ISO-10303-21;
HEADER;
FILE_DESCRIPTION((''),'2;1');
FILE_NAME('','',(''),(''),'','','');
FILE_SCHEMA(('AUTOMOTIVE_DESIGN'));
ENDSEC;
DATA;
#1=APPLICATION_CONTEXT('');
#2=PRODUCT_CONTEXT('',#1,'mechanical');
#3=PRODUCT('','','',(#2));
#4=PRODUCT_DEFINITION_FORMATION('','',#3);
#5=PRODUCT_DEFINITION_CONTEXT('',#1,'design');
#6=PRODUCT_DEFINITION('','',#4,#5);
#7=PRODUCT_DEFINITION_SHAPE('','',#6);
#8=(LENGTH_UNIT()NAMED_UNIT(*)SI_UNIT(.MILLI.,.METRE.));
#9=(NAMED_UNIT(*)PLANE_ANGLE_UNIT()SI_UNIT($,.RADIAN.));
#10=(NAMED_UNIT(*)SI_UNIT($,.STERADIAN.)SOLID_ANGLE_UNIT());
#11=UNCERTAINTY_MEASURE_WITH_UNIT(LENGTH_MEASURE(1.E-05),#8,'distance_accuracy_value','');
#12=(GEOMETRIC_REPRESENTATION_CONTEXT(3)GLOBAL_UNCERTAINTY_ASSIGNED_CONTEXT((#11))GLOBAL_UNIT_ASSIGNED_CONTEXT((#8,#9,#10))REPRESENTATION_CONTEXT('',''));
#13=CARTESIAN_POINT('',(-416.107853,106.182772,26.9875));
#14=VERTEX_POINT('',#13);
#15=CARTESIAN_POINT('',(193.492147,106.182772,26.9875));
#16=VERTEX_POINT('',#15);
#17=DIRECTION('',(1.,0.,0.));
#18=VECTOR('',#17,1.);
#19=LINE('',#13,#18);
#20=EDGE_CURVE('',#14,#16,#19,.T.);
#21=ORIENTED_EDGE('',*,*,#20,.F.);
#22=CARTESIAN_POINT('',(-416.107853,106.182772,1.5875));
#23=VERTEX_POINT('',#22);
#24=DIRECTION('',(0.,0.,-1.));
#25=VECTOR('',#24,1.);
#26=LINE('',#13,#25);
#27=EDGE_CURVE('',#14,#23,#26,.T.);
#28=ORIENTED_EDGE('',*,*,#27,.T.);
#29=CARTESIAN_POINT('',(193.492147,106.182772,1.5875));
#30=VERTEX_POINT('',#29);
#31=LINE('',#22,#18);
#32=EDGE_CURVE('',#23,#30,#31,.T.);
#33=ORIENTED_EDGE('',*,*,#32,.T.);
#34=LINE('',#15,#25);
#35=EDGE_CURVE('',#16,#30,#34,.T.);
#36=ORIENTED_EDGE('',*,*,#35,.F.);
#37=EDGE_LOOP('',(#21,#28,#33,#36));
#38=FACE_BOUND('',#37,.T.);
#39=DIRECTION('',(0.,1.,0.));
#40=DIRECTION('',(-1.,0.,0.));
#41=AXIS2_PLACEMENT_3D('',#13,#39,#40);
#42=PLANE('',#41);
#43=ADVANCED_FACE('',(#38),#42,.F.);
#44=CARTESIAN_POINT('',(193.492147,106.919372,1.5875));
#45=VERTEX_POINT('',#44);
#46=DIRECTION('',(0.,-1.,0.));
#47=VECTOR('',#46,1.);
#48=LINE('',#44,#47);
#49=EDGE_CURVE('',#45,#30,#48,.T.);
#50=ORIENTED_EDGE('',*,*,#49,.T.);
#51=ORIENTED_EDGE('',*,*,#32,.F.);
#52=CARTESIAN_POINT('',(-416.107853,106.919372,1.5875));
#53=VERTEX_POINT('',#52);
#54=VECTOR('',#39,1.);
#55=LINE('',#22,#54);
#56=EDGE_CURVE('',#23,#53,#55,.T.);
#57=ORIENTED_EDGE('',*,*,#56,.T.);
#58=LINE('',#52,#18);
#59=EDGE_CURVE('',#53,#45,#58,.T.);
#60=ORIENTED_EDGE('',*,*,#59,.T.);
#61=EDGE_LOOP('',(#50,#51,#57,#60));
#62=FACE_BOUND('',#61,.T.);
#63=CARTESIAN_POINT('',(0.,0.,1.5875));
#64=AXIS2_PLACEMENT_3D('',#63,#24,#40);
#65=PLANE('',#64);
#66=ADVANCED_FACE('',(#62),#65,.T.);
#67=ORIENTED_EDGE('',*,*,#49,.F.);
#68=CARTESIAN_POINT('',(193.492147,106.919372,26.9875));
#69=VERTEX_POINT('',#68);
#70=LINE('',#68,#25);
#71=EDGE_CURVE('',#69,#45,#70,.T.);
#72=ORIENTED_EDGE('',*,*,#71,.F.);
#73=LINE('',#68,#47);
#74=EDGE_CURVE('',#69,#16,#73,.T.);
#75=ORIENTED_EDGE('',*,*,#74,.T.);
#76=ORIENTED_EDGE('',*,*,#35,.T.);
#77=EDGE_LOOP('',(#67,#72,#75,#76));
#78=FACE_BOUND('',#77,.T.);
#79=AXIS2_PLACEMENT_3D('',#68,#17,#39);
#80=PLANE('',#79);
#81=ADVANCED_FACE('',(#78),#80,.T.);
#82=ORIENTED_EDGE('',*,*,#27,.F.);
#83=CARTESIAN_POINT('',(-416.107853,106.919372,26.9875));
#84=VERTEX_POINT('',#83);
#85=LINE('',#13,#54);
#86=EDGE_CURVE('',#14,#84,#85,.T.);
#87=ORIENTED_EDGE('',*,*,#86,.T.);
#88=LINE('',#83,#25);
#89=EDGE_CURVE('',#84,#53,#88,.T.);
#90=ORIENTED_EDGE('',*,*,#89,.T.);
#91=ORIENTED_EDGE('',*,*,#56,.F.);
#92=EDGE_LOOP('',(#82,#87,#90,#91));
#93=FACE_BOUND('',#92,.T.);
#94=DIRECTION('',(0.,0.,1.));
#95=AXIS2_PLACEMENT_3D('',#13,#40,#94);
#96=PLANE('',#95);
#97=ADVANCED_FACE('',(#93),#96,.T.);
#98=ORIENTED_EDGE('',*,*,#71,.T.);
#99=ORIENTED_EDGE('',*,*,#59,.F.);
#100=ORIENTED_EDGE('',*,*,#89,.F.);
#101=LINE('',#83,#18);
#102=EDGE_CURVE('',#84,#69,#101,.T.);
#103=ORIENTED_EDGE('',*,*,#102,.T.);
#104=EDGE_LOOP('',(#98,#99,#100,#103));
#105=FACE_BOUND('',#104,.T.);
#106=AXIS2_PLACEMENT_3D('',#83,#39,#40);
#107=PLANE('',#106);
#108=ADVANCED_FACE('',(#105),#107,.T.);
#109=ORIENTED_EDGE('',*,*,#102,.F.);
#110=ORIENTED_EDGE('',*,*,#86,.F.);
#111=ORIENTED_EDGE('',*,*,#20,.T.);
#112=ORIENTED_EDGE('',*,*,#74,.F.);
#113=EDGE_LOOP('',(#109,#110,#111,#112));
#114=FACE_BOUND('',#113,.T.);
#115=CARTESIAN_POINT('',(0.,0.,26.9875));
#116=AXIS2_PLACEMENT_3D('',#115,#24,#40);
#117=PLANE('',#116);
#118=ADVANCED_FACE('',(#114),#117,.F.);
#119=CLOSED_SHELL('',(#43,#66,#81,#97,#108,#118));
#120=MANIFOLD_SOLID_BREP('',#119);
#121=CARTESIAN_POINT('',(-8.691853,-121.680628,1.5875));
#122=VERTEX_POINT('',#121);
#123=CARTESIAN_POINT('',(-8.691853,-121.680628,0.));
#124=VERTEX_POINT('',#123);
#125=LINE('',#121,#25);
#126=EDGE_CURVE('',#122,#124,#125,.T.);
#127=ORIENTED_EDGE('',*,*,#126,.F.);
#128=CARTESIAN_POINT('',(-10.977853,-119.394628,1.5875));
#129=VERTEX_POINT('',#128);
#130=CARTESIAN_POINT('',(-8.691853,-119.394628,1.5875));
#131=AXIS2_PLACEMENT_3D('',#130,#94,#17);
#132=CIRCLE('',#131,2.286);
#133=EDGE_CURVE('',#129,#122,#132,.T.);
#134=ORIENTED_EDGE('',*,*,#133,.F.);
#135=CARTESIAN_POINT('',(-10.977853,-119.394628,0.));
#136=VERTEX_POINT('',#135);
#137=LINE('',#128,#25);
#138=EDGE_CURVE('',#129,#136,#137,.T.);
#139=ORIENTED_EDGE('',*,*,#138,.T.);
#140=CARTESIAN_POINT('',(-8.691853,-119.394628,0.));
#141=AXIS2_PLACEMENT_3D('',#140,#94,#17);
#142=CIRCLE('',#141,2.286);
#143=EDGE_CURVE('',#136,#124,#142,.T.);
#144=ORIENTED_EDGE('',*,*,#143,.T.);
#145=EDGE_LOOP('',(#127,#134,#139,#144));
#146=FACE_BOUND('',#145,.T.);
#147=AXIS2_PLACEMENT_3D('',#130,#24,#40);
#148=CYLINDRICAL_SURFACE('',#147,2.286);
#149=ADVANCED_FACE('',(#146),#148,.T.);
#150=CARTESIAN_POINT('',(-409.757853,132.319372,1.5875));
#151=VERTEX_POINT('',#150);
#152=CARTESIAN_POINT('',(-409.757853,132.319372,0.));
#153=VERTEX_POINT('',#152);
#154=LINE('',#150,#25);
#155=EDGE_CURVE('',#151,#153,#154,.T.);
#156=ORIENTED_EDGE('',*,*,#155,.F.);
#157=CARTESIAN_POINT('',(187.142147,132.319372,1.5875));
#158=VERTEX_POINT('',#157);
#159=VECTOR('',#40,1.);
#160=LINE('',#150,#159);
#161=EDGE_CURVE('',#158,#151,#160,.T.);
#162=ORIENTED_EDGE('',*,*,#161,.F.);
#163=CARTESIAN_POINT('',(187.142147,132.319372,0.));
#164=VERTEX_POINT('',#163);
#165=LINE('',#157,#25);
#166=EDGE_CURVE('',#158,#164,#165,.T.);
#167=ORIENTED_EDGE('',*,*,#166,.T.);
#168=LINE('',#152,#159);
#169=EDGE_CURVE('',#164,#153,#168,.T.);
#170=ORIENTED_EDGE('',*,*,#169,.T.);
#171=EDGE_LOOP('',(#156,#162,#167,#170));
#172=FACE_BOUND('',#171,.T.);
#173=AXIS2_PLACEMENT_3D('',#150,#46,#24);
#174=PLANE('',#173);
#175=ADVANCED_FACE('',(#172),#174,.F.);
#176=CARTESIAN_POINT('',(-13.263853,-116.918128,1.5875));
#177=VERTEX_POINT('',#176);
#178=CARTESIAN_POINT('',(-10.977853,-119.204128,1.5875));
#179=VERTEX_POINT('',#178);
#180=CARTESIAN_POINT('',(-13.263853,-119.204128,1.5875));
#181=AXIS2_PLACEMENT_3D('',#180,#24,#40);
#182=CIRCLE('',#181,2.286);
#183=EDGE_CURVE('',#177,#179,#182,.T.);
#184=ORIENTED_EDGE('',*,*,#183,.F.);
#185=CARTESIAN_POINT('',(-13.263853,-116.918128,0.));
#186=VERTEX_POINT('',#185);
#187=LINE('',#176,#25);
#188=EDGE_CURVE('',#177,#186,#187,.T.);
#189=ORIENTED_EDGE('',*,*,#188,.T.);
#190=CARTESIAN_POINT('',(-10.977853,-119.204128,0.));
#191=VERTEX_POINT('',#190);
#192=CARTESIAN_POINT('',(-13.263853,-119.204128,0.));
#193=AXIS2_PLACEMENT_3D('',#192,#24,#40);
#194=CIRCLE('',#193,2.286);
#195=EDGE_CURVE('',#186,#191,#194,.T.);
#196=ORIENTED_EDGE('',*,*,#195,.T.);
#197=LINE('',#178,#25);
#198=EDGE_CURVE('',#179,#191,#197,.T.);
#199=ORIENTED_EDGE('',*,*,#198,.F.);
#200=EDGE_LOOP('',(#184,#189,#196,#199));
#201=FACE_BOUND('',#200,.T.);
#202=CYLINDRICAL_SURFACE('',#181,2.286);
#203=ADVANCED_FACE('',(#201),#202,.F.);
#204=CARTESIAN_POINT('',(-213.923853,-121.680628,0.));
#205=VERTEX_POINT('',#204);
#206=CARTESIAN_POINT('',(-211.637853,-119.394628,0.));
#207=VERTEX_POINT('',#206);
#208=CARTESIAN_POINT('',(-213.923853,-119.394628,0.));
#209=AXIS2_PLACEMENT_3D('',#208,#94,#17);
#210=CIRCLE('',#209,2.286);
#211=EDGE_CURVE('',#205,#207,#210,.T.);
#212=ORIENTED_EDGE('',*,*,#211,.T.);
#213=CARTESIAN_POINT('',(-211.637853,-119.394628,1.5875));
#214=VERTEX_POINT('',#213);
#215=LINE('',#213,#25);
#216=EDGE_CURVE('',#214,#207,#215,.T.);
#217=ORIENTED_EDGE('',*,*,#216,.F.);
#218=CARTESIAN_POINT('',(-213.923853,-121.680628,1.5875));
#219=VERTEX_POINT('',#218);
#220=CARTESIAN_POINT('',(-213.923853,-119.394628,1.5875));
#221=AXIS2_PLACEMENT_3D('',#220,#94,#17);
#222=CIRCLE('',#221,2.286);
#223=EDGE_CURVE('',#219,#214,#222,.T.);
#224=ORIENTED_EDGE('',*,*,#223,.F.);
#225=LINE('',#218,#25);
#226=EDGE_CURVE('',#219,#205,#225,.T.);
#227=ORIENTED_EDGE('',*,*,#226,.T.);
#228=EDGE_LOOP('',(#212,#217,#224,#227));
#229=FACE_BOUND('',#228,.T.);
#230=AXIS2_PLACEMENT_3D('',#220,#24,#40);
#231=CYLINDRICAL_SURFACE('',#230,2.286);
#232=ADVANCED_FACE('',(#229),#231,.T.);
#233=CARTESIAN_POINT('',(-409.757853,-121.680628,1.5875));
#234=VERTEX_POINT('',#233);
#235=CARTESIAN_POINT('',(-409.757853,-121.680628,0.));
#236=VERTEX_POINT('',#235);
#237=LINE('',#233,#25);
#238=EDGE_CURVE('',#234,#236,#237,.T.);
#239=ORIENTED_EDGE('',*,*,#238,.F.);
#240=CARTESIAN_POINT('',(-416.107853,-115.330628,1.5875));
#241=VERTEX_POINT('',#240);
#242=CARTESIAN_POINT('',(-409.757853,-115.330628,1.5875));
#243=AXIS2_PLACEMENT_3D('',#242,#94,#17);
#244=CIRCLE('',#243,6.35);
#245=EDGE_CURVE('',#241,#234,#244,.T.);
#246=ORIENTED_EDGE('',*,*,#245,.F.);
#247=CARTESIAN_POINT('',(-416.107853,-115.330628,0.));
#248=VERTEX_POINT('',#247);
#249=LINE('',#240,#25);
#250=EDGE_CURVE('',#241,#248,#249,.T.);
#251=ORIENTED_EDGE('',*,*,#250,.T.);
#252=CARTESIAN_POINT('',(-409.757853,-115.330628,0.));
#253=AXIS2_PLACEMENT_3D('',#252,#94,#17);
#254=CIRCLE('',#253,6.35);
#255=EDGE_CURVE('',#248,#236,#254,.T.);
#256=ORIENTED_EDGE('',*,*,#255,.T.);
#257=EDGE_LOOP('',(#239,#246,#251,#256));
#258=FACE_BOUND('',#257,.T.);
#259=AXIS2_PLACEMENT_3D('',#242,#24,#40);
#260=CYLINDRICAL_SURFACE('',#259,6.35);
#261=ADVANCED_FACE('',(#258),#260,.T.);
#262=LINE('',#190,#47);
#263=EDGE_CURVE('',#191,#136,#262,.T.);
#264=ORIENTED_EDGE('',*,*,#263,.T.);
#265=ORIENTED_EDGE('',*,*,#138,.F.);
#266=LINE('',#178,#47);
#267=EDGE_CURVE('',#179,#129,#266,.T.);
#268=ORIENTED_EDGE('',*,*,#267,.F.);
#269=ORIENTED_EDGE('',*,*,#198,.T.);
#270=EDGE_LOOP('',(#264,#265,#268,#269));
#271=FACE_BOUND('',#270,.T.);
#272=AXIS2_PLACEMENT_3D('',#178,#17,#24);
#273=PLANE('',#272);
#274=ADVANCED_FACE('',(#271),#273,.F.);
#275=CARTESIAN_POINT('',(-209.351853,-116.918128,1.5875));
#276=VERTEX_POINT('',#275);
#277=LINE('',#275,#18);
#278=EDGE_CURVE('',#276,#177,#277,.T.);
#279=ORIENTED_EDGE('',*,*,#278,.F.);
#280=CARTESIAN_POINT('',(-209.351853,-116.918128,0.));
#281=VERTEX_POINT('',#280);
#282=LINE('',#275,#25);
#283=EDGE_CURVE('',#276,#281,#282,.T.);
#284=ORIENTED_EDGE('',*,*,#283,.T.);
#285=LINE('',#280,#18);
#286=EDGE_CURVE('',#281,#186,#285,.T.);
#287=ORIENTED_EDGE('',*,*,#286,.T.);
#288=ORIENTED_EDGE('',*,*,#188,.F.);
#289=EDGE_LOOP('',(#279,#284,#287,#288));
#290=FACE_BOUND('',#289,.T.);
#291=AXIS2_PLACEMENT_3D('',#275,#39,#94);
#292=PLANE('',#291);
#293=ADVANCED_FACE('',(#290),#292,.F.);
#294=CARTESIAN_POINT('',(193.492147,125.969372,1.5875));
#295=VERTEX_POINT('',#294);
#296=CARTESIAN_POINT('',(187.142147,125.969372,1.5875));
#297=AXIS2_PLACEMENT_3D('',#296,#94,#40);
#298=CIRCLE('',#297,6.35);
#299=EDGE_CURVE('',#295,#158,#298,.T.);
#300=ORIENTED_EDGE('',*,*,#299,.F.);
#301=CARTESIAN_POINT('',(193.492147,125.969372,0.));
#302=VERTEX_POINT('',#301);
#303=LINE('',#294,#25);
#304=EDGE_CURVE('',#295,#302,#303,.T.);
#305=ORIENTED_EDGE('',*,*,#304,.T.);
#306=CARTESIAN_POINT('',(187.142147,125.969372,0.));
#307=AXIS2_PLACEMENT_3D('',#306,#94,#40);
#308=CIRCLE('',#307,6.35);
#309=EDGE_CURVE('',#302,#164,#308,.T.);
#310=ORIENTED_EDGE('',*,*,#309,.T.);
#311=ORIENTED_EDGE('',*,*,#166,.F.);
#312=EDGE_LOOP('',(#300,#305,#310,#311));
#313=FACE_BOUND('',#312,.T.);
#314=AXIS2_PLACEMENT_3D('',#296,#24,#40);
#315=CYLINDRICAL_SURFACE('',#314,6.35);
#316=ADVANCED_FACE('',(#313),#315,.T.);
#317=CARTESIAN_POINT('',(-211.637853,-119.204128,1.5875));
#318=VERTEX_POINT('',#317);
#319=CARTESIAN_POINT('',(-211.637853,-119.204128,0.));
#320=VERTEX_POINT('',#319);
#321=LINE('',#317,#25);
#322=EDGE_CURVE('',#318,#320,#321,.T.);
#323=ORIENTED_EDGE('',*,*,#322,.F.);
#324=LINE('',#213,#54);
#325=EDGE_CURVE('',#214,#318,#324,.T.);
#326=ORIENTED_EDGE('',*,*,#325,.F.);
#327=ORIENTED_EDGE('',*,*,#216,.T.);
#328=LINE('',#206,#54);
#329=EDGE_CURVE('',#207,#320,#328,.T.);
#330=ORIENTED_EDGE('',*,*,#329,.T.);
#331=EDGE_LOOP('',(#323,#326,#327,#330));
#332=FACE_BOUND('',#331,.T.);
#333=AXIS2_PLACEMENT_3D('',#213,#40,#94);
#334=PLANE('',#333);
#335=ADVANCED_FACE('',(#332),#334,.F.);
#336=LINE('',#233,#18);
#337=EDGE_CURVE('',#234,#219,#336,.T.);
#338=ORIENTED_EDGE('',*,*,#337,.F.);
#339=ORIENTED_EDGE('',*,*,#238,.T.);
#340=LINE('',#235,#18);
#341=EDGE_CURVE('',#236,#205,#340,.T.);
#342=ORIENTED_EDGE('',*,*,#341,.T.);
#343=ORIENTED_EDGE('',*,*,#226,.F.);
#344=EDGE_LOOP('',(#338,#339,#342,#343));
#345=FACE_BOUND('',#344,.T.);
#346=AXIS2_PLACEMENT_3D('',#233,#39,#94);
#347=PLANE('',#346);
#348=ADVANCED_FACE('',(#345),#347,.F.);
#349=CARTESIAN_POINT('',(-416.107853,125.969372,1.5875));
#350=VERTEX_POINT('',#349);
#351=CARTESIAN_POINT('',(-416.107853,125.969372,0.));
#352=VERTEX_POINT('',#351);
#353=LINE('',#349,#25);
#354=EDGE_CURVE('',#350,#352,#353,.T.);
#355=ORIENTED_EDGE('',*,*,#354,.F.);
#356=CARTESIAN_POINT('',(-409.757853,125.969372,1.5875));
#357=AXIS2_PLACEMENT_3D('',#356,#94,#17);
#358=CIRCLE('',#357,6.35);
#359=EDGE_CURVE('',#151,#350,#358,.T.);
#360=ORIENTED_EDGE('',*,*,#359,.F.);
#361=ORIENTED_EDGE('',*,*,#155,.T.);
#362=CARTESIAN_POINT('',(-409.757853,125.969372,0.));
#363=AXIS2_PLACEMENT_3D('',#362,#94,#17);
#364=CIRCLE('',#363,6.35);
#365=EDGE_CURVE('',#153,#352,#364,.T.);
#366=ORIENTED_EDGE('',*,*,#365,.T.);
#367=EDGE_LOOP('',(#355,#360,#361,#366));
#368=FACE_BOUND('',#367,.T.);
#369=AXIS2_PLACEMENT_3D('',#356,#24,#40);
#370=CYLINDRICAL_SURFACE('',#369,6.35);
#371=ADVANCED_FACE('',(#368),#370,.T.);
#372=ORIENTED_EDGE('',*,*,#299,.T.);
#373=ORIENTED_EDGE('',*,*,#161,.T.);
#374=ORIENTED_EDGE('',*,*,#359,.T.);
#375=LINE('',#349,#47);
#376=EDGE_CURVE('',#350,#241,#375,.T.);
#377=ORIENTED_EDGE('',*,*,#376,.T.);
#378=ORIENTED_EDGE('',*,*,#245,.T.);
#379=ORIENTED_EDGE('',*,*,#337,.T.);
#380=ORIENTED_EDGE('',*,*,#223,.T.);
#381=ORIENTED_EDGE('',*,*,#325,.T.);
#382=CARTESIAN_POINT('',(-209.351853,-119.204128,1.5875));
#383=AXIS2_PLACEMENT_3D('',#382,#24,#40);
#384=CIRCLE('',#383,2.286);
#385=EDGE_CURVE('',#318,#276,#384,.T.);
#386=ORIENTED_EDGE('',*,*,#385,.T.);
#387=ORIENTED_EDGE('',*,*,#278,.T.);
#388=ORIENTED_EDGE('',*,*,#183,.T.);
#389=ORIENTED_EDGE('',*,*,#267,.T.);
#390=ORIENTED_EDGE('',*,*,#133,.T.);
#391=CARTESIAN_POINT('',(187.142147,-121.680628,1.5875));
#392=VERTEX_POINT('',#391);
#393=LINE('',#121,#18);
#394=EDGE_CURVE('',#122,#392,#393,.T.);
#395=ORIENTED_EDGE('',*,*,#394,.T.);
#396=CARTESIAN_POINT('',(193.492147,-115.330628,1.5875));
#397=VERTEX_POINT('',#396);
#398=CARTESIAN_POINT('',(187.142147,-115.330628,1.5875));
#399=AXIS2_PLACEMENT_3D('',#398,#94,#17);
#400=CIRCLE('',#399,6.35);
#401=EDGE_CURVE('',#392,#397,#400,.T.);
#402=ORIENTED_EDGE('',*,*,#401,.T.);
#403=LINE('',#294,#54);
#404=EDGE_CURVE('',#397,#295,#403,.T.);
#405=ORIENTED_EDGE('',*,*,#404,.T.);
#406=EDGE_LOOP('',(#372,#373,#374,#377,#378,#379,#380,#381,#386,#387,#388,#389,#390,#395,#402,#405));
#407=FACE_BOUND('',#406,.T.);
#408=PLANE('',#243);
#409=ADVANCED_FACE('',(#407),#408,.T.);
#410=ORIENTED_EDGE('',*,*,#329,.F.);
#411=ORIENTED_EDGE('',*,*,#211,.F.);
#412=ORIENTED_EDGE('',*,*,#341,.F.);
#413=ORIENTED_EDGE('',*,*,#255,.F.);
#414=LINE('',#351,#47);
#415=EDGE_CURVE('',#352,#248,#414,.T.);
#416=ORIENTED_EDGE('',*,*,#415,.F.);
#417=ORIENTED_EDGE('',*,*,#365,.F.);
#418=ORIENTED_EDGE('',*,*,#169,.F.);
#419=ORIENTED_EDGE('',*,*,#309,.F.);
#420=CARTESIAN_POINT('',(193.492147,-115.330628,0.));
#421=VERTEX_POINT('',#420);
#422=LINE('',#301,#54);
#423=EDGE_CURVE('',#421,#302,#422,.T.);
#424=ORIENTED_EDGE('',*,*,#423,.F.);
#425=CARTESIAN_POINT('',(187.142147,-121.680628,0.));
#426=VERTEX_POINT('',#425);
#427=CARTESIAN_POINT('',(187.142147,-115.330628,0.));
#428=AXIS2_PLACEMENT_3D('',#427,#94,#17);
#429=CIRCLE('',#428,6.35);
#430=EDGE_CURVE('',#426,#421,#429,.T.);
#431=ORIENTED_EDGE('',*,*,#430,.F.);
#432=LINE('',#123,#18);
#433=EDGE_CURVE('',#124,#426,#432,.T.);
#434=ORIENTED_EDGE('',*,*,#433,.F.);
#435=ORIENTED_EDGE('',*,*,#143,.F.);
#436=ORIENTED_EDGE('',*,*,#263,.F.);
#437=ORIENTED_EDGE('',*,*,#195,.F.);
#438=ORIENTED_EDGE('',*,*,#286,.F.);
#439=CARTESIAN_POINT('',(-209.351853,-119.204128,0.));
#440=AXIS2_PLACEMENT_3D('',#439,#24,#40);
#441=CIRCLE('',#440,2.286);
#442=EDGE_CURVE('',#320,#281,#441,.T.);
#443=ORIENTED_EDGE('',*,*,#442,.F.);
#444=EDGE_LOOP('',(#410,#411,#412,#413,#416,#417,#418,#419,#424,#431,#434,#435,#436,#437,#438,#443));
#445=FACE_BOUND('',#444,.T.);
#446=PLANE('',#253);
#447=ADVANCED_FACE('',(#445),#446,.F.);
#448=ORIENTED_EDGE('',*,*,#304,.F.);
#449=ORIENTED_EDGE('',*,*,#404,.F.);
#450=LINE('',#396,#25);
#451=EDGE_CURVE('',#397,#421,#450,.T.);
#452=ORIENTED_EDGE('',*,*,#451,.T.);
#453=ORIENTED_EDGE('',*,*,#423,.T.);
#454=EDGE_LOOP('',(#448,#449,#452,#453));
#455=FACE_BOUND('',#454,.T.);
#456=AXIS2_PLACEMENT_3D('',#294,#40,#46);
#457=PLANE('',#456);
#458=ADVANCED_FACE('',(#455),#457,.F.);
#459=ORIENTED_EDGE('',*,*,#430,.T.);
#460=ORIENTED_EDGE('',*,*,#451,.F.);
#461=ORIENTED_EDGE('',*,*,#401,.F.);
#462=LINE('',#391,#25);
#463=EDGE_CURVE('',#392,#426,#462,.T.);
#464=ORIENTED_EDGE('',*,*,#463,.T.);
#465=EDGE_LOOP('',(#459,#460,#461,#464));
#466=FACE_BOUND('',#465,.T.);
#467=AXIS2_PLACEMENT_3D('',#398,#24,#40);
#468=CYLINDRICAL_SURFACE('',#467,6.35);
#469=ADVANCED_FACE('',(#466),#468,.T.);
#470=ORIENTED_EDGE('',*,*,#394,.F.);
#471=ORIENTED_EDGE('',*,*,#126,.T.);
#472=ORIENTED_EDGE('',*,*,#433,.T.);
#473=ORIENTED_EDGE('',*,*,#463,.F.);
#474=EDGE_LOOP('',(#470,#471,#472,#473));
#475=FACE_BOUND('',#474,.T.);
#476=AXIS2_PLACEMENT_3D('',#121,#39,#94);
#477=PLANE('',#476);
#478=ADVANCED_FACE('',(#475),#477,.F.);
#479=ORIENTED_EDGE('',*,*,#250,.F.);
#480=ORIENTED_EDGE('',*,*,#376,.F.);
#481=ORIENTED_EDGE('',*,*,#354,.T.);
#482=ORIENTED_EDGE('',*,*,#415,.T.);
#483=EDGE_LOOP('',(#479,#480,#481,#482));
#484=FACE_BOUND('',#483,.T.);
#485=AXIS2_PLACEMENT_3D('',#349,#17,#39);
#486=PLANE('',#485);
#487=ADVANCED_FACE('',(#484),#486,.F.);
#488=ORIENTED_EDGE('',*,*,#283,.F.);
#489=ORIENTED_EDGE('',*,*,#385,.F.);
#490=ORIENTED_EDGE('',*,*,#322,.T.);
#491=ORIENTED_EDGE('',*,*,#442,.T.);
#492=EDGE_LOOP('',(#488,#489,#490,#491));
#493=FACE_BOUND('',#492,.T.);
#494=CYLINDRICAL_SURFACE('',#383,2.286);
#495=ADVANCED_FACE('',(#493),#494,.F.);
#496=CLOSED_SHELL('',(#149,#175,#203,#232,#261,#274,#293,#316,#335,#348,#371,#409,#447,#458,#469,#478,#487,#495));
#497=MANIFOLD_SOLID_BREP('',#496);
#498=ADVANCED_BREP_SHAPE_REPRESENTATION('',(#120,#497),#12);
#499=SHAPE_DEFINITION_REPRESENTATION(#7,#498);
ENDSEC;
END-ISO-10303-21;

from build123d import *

# Parameters (mm, degrees)
BOSS_EXTRUDE1_DEPTH = 1.5875
SKETCH4_W           = 609.6
SKETCH4_H           = 0.7366
BASE_FLANGE1_DEPTH  = 25.4


# Sheet-metal steps are written as plain solids
with BuildPart() as part:
    # Sketch1 → Boss-Extrude1 (new body)
    with BuildSketch(Plane.XY):
        with BuildLine():
            Line((-409.757853403, 132.319371728), (187.142146597, 132.319371728))
            ThreePointArc((187.142146597, 132.319371728), (191.632274657, 130.459499788), (193.492146597, 125.969371728))
            Line((193.492146597, 125.969371728), (193.492146597, -115.330628272))
            ThreePointArc((193.492146597, -115.330628272), (191.632274657, -119.820756333), (187.142146597, -121.680628272))
            Line((187.142146597, -121.680628272), (-8.691853403, -121.680628272))
            ThreePointArc((-8.691853403, -121.680628272), (-10.308299505, -121.011074374), (-10.977853403, -119.394628272))
            Line((-10.977853403, -119.394628272), (-10.977853403, -119.204128272))
            ThreePointArc((-10.977853403, -119.204128272), (-11.647407301, -117.58768217), (-13.263853403, -116.918128272))
            Line((-13.263853403, -116.918128272), (-209.351853403, -116.918128272))
            ThreePointArc((-209.351853403, -116.918128272), (-210.968299505, -117.58768217), (-211.637853403, -119.204128272))
            Line((-211.637853403, -119.204128272), (-211.637853403, -119.394628272))
            ThreePointArc((-211.637853403, -119.394628272), (-212.307407301, -121.011074374), (-213.923853403, -121.680628272))
            Line((-213.923853403, -121.680628272), (-409.757853403, -121.680628272))
            ThreePointArc((-409.757853403, -121.680628272), (-414.247981464, -119.820756333), (-416.107853403, -115.330628272))
            Line((-416.107853403, -115.330628272), (-416.107853403, 125.969371728))
            ThreePointArc((-416.107853403, 125.969371728), (-414.247981464, 130.459499788), (-409.757853403, 132.319371728))
        make_face()
    extrude(amount=BOSS_EXTRUDE1_DEPTH)


with BuildPart() as body_2:
    # Sketch4 → Base-Flange1 (new body)
    with BuildSketch(Plane.XY.offset(1.5875)):
        with Locations((-111.307853403, 106.551071728)):
            Rectangle(SKETCH4_W, SKETCH4_H)
    extrude(amount=BASE_FLANGE1_DEPTH)


solid = Compound([part.part, body_2.part])
